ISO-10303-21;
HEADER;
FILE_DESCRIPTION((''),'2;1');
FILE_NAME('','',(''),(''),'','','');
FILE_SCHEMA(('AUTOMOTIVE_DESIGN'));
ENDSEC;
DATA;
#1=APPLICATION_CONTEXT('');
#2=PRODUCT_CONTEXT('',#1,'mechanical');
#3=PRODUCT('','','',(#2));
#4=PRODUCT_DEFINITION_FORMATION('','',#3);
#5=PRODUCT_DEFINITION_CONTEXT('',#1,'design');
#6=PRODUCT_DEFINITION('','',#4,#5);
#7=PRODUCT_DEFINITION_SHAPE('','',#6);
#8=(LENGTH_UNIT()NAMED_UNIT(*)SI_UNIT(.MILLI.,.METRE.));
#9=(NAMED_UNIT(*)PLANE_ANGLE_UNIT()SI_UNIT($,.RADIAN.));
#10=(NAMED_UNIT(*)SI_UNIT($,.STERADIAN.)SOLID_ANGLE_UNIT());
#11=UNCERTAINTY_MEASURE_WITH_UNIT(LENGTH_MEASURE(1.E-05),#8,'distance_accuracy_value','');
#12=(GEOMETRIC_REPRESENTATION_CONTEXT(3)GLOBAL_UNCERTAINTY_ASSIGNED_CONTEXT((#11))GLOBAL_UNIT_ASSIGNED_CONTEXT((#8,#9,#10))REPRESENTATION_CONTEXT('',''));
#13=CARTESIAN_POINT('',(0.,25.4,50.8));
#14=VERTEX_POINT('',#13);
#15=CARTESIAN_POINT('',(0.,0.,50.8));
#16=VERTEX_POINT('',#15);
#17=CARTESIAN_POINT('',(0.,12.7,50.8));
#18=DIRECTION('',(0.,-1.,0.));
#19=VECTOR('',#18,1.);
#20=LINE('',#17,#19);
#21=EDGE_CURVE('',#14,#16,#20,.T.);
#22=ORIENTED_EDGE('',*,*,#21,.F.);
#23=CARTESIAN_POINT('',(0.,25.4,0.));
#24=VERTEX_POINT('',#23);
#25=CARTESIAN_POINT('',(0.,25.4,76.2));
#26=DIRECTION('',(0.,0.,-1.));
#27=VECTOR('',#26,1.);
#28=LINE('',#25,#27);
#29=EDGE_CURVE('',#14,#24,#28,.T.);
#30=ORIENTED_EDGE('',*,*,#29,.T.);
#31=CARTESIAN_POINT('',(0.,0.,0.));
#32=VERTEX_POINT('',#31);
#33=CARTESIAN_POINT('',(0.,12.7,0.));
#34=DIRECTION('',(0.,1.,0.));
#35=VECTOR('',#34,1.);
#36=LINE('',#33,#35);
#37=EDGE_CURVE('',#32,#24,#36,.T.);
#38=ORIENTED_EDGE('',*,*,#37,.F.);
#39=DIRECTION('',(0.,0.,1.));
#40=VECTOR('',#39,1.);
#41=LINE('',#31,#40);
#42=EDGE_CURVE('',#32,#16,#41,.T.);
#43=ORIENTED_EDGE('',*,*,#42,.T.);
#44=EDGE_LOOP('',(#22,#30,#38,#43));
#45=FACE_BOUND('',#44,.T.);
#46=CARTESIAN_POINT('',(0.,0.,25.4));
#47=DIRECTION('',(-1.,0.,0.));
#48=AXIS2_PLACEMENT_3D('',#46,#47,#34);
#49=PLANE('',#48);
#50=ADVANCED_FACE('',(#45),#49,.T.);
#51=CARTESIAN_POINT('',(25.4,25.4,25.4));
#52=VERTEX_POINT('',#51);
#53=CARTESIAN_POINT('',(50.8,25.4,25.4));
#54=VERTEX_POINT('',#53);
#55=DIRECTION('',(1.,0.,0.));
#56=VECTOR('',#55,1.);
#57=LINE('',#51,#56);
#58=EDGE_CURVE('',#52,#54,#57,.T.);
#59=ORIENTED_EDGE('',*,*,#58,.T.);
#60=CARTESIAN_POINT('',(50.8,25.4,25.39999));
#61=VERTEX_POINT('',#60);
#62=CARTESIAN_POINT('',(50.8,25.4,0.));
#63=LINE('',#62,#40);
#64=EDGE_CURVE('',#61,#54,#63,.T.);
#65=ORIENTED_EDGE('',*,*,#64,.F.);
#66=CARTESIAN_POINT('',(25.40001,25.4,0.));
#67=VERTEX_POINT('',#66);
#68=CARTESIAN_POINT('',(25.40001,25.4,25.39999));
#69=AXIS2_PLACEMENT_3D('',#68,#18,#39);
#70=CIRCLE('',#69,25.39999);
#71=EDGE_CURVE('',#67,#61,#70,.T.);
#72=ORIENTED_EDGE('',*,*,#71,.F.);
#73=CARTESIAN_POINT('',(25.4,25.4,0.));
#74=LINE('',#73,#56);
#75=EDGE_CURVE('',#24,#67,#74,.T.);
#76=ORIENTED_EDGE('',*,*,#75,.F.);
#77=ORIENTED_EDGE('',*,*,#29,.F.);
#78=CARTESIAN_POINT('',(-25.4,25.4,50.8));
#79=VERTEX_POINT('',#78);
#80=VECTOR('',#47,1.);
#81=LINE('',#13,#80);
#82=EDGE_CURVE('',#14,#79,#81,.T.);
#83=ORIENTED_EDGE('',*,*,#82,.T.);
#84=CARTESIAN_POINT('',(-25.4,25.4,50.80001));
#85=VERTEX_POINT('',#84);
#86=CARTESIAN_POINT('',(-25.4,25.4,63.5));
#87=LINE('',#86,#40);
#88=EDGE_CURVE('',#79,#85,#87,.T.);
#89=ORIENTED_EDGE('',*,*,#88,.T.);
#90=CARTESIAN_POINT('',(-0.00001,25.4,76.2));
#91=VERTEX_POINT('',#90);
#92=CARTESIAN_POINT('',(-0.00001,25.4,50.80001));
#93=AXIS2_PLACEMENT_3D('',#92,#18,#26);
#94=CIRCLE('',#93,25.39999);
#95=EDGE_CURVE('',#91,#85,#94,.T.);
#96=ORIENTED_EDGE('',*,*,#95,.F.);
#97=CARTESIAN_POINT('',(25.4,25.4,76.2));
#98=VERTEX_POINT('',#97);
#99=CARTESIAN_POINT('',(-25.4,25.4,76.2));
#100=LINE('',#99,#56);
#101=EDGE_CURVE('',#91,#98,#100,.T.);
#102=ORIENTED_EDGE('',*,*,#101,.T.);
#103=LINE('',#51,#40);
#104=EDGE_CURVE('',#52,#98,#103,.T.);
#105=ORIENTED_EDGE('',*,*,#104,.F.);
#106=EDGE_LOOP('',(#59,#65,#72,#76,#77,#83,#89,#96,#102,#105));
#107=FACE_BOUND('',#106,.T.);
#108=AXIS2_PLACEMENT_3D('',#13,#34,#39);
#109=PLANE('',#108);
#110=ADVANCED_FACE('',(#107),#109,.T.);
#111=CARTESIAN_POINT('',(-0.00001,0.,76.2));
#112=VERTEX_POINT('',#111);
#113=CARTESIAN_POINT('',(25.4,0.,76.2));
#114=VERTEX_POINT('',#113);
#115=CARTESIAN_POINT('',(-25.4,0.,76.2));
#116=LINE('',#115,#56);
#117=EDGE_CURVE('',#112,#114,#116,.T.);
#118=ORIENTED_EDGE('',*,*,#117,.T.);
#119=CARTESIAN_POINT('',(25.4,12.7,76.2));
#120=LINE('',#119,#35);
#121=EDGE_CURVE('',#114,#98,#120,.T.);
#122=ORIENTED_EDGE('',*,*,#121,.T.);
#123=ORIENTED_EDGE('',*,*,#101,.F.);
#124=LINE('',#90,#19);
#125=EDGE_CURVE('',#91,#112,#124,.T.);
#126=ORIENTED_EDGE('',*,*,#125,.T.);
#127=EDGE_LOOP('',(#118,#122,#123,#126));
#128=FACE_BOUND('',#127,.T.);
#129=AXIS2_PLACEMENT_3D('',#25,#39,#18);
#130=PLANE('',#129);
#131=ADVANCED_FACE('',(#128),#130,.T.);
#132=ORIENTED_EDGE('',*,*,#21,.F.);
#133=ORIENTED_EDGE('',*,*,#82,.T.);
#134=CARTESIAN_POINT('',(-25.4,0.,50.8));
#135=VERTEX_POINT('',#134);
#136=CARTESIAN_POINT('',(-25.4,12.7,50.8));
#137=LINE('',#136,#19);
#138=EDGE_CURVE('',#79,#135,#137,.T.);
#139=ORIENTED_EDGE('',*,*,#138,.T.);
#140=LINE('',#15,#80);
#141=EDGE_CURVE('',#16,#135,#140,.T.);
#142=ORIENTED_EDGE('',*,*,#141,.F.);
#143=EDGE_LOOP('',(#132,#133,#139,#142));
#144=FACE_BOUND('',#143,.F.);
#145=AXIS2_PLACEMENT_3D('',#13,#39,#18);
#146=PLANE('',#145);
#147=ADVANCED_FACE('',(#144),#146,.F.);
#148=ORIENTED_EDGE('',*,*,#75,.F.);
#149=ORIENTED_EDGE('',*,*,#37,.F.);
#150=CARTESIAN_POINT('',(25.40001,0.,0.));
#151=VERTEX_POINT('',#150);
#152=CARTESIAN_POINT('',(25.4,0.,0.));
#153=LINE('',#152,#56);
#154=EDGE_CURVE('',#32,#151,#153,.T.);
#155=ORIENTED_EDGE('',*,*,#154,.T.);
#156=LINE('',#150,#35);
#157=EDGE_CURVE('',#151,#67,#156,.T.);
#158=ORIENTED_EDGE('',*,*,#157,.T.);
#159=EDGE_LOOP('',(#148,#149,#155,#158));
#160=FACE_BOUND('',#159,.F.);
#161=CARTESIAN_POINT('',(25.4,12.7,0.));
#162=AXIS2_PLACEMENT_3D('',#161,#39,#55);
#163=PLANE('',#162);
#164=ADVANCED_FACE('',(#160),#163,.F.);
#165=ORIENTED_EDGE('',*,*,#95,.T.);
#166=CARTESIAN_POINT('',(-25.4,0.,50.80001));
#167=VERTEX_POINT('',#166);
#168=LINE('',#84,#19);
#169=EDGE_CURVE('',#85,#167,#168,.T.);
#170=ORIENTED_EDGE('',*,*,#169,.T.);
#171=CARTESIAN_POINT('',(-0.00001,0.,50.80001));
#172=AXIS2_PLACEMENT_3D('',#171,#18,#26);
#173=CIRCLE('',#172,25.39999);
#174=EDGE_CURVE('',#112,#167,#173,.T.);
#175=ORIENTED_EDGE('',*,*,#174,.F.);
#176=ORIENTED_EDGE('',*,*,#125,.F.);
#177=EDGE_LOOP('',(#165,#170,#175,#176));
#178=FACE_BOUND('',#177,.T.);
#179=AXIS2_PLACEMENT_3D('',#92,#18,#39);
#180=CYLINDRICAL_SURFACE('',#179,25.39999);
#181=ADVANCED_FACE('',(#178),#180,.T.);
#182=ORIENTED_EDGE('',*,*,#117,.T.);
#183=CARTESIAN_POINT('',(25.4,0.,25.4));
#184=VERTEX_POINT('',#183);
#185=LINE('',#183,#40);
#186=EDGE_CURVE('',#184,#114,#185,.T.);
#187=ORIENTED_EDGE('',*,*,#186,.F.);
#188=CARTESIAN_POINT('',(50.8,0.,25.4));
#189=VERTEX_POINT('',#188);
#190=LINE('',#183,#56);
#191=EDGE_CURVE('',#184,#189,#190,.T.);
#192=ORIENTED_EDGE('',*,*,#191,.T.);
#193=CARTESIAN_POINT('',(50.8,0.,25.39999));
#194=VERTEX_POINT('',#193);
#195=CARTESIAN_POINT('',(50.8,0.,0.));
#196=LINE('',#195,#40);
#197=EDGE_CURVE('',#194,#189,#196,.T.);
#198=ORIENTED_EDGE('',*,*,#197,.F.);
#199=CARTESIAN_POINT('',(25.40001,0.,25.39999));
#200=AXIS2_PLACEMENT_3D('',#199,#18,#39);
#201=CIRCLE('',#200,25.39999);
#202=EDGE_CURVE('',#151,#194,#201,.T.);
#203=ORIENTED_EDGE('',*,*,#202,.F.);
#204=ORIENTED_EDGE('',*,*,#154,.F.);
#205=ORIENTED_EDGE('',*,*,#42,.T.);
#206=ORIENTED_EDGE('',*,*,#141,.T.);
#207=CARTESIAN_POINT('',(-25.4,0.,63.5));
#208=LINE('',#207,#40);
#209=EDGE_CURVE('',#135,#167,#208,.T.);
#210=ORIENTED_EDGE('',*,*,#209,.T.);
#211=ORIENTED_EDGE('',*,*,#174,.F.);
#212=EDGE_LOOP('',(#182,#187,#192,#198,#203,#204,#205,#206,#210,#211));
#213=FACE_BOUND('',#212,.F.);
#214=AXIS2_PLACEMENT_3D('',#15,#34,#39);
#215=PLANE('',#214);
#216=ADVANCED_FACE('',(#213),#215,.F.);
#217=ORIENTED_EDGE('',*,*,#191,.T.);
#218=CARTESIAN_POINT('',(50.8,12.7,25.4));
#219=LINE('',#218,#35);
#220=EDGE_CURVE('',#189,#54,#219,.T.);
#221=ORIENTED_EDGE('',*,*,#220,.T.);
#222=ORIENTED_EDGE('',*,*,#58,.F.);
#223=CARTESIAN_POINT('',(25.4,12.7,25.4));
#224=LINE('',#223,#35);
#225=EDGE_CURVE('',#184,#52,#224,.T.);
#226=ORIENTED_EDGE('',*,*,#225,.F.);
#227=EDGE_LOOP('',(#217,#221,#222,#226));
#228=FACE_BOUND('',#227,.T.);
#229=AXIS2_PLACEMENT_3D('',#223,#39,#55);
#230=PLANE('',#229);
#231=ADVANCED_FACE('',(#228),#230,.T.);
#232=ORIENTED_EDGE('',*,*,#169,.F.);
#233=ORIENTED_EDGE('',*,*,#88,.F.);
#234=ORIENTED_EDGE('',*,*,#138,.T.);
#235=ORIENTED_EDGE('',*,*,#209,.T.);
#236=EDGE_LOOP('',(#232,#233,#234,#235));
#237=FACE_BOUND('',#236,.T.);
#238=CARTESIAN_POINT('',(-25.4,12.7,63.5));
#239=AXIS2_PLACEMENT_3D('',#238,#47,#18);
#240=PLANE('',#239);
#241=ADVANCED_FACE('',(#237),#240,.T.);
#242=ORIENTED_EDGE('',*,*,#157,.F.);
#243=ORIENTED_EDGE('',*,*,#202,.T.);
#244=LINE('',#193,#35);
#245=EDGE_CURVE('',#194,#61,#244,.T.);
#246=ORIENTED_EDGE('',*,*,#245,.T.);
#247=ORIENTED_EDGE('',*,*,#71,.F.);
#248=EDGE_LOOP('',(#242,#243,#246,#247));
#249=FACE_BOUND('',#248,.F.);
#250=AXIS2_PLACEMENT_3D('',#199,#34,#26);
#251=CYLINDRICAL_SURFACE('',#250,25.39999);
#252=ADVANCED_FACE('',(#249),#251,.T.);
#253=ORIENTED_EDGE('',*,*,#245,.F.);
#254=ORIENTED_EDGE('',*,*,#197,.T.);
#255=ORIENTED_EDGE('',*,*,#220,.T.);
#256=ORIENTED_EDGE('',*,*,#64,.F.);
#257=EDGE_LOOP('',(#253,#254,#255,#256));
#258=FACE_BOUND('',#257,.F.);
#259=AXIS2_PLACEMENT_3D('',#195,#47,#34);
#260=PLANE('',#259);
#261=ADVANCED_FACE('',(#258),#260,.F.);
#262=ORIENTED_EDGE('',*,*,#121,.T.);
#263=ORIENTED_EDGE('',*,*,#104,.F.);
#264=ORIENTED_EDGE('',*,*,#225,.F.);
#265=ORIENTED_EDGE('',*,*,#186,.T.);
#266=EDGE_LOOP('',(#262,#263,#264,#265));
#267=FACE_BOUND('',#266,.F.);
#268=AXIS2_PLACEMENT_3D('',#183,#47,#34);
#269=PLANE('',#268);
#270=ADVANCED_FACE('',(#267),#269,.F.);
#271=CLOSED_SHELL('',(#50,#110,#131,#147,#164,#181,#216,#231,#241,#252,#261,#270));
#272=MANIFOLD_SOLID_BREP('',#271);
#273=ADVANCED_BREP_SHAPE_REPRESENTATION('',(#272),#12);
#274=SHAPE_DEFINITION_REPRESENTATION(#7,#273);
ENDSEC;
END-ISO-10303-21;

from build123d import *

# Parameters (mm, degrees)
F0_W     = 50.8
F0_H     = 25.4
F1_DEPTH = 25.4
F2_W     = 25.4
F2_H     = 25.4
F3_DEPTH = 50.8
F4_W     = 25.4
F4_H     = 25.4
F5_DEPTH = 25.4
F6_R     = 25.39999


# Not quite as in the source:
# - a fillet or chamfer is up to 0.001 mm smaller than in the source, because OpenCascade refuses the exact size


with BuildPart() as f1:
    # F0 (on Top) → F1 (new body)
    with BuildSketch(Plane.XY):
        with Locations((25.4, 12.7)):
            Rectangle(F0_W, F0_H)
    extrude(amount=F1_DEPTH)

    # F2 (on face) → F3 (join)
    with BuildSketch(Plane.XY.offset(25.4)):
        with Locations((12.7, 12.7)):
            Rectangle(F2_W, F2_H)
    extrude(amount=F3_DEPTH)

    # F4 (on face) → F5 (join)
    with BuildSketch(Plane(origin=(0, 0, 0), x_dir=(0, -1, 0), z_dir=(-1, 0, 0))):
        with Locations((-12.7, 63.5)):
            Rectangle(F4_W, F4_H)
    extrude(amount=F5_DEPTH)

    # F6 (radius 25.4 in the source; OpenCascade refuses exactly that, so slightly less here)
    f6_edges = [f1.edges().sort_by_distance(p)[0] for p in [
        (50.8, 12.7, 0),
        (-25.4, 12.7, 76.2),
    ]]
    fillet(f6_edges, radius=F6_R)


solid = f1.part
